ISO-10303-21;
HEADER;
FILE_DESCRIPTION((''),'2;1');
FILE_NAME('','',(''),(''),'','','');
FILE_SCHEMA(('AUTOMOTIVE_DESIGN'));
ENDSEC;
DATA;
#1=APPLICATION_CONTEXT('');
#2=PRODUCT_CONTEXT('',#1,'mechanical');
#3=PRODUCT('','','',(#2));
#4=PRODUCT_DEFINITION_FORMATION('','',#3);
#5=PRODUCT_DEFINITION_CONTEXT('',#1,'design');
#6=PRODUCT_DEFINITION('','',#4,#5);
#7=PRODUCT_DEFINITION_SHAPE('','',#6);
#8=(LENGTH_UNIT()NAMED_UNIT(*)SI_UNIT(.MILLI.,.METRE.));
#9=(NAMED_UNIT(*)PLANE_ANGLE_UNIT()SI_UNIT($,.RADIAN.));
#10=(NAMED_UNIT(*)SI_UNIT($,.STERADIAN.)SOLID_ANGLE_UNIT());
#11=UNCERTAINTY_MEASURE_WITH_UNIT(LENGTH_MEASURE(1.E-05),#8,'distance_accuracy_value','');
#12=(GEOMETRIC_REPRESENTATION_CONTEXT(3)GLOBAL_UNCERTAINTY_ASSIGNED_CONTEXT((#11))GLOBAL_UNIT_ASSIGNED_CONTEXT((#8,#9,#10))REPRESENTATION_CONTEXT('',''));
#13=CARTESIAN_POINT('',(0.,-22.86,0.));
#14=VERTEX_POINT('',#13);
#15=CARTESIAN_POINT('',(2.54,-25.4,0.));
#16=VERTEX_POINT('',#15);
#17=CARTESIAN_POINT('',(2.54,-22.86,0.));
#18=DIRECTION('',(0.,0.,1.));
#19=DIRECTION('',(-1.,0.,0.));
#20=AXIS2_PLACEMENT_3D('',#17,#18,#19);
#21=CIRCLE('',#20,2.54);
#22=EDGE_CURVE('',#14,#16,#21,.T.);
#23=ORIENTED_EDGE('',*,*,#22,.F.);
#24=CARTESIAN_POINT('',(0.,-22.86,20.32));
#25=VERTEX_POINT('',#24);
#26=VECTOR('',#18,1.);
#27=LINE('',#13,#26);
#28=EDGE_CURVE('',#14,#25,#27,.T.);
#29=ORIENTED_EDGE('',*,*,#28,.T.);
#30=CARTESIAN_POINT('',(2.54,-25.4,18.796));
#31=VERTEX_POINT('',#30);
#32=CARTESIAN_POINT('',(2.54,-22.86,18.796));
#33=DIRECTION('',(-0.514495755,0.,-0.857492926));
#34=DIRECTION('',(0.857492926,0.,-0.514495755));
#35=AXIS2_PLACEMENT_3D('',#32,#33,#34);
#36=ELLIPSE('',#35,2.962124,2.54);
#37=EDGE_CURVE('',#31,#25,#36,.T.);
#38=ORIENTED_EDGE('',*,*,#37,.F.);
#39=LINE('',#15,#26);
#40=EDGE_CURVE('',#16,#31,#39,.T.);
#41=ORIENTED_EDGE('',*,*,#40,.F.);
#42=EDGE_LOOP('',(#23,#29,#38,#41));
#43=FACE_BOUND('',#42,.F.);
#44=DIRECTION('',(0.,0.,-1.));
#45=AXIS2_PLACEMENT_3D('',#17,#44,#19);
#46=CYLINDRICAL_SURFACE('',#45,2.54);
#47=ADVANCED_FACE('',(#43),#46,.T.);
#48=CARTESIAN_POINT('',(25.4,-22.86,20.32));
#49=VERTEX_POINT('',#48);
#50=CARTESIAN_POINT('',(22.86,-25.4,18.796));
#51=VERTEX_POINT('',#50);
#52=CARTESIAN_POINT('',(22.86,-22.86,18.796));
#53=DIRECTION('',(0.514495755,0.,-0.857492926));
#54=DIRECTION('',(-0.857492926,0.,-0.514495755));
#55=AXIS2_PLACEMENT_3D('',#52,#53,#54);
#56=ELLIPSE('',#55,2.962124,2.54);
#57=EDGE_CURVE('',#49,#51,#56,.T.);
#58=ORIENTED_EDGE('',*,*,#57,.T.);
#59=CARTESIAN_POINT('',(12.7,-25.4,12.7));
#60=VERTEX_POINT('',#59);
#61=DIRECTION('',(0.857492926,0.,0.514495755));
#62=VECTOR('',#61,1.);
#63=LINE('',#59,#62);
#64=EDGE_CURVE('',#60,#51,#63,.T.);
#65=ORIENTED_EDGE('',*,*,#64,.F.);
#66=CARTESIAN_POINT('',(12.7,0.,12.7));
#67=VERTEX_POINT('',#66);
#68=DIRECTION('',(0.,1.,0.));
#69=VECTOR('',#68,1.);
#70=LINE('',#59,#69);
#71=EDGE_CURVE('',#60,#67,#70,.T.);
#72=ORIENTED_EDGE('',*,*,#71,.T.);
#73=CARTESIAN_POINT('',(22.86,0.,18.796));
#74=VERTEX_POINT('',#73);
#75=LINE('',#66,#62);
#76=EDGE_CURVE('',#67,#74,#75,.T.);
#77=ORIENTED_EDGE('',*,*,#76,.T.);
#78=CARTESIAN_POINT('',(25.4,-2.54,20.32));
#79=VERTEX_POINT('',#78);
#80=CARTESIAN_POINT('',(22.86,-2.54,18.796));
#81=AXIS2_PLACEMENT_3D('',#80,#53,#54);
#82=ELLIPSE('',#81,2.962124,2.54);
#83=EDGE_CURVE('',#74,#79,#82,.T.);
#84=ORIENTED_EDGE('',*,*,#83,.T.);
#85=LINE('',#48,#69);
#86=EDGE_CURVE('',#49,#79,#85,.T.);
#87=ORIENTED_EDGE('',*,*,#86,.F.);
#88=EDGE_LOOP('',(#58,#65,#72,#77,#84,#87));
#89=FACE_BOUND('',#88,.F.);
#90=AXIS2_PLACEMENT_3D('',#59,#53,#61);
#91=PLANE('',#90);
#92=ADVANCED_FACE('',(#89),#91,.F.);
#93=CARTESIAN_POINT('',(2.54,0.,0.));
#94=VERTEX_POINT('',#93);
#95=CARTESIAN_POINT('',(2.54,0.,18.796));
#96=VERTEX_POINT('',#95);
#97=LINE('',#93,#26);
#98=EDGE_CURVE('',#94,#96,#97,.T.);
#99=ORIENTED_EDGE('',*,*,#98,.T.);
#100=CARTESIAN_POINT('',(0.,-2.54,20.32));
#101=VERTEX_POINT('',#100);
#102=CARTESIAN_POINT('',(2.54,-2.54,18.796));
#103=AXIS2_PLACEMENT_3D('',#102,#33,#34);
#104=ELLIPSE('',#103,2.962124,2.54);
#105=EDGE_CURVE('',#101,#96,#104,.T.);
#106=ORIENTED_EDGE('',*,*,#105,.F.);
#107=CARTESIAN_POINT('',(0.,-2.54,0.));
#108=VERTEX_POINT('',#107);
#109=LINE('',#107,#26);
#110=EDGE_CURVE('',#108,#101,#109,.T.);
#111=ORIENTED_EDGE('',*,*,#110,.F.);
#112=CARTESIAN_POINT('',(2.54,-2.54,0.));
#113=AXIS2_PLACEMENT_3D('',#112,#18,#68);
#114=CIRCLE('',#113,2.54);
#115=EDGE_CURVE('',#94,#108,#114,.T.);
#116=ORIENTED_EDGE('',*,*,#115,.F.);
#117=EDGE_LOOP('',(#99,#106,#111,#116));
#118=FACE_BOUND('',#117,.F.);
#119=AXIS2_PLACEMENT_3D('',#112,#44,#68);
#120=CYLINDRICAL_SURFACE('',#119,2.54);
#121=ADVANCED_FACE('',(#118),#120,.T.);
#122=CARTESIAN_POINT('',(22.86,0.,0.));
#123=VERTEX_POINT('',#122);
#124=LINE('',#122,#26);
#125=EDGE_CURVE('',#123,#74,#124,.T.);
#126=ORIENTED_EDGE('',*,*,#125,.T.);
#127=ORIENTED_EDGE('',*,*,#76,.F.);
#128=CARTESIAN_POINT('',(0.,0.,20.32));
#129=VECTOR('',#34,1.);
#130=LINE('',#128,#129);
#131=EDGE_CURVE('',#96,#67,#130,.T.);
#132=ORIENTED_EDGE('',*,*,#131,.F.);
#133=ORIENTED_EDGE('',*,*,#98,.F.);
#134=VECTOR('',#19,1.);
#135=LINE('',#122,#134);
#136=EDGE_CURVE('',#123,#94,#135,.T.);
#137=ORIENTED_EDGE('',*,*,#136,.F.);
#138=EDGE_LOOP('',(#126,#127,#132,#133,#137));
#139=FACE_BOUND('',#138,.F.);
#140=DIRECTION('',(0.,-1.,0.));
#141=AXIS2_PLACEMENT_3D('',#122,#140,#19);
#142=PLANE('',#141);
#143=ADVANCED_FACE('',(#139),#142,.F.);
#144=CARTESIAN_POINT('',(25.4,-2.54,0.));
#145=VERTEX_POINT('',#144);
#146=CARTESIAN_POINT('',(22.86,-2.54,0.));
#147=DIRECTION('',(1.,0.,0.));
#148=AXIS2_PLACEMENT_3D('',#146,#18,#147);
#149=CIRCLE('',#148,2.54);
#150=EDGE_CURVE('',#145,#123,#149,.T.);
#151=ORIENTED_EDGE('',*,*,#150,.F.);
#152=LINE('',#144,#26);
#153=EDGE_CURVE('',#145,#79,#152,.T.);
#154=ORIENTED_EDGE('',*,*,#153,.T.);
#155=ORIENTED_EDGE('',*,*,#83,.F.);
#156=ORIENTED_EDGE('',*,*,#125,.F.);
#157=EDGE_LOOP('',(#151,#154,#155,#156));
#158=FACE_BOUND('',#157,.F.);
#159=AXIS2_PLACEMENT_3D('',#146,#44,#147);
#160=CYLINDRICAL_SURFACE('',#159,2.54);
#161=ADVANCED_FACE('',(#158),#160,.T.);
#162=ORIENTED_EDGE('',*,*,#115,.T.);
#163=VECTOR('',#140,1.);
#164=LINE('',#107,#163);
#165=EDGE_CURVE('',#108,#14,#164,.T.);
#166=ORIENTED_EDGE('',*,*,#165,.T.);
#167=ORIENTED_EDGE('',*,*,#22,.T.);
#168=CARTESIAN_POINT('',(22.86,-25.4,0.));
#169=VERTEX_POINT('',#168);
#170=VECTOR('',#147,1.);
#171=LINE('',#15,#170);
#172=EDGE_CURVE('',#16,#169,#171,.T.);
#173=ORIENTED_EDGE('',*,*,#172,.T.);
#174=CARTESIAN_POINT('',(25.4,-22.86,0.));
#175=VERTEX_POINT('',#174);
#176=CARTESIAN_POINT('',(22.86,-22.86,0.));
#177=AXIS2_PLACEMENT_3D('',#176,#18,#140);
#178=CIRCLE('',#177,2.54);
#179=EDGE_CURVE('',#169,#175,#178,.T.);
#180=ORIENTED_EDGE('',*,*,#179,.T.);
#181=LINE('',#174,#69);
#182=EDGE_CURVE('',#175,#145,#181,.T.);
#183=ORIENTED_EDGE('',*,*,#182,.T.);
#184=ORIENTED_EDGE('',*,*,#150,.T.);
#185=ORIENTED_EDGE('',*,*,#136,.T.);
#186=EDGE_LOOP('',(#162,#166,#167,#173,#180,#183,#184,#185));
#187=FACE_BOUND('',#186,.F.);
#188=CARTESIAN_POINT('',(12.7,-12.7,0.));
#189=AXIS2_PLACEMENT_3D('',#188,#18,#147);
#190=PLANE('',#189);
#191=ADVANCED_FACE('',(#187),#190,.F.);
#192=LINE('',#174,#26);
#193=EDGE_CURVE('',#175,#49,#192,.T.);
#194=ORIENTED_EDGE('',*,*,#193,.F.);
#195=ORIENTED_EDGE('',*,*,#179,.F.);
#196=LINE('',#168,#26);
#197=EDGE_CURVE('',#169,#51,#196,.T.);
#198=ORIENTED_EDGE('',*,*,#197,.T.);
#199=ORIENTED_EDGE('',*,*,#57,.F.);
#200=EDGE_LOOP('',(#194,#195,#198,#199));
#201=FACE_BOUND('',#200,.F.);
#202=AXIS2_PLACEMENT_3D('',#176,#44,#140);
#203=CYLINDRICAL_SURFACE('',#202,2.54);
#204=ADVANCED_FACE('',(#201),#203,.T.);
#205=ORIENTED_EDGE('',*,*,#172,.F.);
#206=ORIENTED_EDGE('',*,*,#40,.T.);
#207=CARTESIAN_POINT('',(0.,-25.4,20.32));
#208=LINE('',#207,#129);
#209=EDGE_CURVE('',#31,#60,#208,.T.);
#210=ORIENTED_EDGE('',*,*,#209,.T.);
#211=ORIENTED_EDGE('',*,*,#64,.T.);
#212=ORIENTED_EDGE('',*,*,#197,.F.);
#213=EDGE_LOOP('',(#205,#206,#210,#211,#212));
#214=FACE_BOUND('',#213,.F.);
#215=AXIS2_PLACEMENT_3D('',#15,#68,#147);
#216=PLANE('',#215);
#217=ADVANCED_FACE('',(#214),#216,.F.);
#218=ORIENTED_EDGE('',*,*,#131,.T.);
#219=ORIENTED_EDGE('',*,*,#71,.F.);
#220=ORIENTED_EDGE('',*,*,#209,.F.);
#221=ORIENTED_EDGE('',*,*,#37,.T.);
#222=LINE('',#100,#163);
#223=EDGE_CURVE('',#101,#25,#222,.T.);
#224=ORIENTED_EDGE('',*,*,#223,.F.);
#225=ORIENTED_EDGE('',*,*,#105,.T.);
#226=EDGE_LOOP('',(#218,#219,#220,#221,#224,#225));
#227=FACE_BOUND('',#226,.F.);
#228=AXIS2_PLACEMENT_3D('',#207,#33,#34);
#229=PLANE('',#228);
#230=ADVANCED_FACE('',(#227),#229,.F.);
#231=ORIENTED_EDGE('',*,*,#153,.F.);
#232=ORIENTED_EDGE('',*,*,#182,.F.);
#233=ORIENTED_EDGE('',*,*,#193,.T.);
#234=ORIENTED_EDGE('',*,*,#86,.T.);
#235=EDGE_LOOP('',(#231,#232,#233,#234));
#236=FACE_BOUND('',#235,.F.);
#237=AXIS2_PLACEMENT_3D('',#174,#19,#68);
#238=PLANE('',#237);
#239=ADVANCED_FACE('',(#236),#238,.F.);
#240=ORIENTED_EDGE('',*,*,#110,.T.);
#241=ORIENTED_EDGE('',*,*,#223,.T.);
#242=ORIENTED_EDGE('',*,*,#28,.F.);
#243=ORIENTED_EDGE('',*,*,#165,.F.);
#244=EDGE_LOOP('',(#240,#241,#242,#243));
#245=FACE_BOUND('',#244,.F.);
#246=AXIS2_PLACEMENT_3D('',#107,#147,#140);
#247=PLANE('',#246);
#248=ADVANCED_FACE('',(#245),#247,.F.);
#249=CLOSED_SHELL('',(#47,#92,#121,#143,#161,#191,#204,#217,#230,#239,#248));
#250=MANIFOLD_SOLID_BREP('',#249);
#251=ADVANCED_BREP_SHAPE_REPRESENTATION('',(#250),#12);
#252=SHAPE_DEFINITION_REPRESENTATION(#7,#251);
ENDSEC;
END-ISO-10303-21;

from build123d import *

# Parameters (mm, degrees)
F1_DEPTH = 20.32
F4_DEPTH = 25.4


with BuildPart() as f1:
    # F0 (on Top) → F1 (new body)
    with BuildSketch(Plane.XY):
        with BuildLine():
            Line((22.86, 0), (2.54, 0))
            ThreePointArc((2.54, 0), (0.7439487758, -0.7439487758), (0, -2.54))
            Line((0, -2.54), (0, -22.86))
            ThreePointArc((0, -22.86), (0.7439487758, -24.6560512242), (2.54, -25.4))
            Line((2.54, -25.4), (22.86, -25.4))
            ThreePointArc((22.86, -25.4), (24.6560512242, -24.6560512242), (25.4, -22.86))
            Line((25.4, -22.86), (25.4, -2.54))
            ThreePointArc((25.4, -2.54), (24.6560512242, -0.7439487758), (22.86, 0))
        make_face()
    extrude(amount=F1_DEPTH)

    # F2 (on face) → F4 (cut)
    with BuildSketch(Plane.XZ.offset(25.4)):
        Polygon((2.54, 18.796), (12.7, 12.7), (22.86, 18.796), (22.86, 20.32), (2.54, 20.32), align=None)
        Polygon((0, 20.32), (2.54, 18.796), (2.54, 20.32), align=None)
        Polygon((22.86, 20.32), (22.86, 18.796), (25.4, 20.32), align=None)
    extrude(amount=-F4_DEPTH, mode=Mode.SUBTRACT)


solid = f1.part
